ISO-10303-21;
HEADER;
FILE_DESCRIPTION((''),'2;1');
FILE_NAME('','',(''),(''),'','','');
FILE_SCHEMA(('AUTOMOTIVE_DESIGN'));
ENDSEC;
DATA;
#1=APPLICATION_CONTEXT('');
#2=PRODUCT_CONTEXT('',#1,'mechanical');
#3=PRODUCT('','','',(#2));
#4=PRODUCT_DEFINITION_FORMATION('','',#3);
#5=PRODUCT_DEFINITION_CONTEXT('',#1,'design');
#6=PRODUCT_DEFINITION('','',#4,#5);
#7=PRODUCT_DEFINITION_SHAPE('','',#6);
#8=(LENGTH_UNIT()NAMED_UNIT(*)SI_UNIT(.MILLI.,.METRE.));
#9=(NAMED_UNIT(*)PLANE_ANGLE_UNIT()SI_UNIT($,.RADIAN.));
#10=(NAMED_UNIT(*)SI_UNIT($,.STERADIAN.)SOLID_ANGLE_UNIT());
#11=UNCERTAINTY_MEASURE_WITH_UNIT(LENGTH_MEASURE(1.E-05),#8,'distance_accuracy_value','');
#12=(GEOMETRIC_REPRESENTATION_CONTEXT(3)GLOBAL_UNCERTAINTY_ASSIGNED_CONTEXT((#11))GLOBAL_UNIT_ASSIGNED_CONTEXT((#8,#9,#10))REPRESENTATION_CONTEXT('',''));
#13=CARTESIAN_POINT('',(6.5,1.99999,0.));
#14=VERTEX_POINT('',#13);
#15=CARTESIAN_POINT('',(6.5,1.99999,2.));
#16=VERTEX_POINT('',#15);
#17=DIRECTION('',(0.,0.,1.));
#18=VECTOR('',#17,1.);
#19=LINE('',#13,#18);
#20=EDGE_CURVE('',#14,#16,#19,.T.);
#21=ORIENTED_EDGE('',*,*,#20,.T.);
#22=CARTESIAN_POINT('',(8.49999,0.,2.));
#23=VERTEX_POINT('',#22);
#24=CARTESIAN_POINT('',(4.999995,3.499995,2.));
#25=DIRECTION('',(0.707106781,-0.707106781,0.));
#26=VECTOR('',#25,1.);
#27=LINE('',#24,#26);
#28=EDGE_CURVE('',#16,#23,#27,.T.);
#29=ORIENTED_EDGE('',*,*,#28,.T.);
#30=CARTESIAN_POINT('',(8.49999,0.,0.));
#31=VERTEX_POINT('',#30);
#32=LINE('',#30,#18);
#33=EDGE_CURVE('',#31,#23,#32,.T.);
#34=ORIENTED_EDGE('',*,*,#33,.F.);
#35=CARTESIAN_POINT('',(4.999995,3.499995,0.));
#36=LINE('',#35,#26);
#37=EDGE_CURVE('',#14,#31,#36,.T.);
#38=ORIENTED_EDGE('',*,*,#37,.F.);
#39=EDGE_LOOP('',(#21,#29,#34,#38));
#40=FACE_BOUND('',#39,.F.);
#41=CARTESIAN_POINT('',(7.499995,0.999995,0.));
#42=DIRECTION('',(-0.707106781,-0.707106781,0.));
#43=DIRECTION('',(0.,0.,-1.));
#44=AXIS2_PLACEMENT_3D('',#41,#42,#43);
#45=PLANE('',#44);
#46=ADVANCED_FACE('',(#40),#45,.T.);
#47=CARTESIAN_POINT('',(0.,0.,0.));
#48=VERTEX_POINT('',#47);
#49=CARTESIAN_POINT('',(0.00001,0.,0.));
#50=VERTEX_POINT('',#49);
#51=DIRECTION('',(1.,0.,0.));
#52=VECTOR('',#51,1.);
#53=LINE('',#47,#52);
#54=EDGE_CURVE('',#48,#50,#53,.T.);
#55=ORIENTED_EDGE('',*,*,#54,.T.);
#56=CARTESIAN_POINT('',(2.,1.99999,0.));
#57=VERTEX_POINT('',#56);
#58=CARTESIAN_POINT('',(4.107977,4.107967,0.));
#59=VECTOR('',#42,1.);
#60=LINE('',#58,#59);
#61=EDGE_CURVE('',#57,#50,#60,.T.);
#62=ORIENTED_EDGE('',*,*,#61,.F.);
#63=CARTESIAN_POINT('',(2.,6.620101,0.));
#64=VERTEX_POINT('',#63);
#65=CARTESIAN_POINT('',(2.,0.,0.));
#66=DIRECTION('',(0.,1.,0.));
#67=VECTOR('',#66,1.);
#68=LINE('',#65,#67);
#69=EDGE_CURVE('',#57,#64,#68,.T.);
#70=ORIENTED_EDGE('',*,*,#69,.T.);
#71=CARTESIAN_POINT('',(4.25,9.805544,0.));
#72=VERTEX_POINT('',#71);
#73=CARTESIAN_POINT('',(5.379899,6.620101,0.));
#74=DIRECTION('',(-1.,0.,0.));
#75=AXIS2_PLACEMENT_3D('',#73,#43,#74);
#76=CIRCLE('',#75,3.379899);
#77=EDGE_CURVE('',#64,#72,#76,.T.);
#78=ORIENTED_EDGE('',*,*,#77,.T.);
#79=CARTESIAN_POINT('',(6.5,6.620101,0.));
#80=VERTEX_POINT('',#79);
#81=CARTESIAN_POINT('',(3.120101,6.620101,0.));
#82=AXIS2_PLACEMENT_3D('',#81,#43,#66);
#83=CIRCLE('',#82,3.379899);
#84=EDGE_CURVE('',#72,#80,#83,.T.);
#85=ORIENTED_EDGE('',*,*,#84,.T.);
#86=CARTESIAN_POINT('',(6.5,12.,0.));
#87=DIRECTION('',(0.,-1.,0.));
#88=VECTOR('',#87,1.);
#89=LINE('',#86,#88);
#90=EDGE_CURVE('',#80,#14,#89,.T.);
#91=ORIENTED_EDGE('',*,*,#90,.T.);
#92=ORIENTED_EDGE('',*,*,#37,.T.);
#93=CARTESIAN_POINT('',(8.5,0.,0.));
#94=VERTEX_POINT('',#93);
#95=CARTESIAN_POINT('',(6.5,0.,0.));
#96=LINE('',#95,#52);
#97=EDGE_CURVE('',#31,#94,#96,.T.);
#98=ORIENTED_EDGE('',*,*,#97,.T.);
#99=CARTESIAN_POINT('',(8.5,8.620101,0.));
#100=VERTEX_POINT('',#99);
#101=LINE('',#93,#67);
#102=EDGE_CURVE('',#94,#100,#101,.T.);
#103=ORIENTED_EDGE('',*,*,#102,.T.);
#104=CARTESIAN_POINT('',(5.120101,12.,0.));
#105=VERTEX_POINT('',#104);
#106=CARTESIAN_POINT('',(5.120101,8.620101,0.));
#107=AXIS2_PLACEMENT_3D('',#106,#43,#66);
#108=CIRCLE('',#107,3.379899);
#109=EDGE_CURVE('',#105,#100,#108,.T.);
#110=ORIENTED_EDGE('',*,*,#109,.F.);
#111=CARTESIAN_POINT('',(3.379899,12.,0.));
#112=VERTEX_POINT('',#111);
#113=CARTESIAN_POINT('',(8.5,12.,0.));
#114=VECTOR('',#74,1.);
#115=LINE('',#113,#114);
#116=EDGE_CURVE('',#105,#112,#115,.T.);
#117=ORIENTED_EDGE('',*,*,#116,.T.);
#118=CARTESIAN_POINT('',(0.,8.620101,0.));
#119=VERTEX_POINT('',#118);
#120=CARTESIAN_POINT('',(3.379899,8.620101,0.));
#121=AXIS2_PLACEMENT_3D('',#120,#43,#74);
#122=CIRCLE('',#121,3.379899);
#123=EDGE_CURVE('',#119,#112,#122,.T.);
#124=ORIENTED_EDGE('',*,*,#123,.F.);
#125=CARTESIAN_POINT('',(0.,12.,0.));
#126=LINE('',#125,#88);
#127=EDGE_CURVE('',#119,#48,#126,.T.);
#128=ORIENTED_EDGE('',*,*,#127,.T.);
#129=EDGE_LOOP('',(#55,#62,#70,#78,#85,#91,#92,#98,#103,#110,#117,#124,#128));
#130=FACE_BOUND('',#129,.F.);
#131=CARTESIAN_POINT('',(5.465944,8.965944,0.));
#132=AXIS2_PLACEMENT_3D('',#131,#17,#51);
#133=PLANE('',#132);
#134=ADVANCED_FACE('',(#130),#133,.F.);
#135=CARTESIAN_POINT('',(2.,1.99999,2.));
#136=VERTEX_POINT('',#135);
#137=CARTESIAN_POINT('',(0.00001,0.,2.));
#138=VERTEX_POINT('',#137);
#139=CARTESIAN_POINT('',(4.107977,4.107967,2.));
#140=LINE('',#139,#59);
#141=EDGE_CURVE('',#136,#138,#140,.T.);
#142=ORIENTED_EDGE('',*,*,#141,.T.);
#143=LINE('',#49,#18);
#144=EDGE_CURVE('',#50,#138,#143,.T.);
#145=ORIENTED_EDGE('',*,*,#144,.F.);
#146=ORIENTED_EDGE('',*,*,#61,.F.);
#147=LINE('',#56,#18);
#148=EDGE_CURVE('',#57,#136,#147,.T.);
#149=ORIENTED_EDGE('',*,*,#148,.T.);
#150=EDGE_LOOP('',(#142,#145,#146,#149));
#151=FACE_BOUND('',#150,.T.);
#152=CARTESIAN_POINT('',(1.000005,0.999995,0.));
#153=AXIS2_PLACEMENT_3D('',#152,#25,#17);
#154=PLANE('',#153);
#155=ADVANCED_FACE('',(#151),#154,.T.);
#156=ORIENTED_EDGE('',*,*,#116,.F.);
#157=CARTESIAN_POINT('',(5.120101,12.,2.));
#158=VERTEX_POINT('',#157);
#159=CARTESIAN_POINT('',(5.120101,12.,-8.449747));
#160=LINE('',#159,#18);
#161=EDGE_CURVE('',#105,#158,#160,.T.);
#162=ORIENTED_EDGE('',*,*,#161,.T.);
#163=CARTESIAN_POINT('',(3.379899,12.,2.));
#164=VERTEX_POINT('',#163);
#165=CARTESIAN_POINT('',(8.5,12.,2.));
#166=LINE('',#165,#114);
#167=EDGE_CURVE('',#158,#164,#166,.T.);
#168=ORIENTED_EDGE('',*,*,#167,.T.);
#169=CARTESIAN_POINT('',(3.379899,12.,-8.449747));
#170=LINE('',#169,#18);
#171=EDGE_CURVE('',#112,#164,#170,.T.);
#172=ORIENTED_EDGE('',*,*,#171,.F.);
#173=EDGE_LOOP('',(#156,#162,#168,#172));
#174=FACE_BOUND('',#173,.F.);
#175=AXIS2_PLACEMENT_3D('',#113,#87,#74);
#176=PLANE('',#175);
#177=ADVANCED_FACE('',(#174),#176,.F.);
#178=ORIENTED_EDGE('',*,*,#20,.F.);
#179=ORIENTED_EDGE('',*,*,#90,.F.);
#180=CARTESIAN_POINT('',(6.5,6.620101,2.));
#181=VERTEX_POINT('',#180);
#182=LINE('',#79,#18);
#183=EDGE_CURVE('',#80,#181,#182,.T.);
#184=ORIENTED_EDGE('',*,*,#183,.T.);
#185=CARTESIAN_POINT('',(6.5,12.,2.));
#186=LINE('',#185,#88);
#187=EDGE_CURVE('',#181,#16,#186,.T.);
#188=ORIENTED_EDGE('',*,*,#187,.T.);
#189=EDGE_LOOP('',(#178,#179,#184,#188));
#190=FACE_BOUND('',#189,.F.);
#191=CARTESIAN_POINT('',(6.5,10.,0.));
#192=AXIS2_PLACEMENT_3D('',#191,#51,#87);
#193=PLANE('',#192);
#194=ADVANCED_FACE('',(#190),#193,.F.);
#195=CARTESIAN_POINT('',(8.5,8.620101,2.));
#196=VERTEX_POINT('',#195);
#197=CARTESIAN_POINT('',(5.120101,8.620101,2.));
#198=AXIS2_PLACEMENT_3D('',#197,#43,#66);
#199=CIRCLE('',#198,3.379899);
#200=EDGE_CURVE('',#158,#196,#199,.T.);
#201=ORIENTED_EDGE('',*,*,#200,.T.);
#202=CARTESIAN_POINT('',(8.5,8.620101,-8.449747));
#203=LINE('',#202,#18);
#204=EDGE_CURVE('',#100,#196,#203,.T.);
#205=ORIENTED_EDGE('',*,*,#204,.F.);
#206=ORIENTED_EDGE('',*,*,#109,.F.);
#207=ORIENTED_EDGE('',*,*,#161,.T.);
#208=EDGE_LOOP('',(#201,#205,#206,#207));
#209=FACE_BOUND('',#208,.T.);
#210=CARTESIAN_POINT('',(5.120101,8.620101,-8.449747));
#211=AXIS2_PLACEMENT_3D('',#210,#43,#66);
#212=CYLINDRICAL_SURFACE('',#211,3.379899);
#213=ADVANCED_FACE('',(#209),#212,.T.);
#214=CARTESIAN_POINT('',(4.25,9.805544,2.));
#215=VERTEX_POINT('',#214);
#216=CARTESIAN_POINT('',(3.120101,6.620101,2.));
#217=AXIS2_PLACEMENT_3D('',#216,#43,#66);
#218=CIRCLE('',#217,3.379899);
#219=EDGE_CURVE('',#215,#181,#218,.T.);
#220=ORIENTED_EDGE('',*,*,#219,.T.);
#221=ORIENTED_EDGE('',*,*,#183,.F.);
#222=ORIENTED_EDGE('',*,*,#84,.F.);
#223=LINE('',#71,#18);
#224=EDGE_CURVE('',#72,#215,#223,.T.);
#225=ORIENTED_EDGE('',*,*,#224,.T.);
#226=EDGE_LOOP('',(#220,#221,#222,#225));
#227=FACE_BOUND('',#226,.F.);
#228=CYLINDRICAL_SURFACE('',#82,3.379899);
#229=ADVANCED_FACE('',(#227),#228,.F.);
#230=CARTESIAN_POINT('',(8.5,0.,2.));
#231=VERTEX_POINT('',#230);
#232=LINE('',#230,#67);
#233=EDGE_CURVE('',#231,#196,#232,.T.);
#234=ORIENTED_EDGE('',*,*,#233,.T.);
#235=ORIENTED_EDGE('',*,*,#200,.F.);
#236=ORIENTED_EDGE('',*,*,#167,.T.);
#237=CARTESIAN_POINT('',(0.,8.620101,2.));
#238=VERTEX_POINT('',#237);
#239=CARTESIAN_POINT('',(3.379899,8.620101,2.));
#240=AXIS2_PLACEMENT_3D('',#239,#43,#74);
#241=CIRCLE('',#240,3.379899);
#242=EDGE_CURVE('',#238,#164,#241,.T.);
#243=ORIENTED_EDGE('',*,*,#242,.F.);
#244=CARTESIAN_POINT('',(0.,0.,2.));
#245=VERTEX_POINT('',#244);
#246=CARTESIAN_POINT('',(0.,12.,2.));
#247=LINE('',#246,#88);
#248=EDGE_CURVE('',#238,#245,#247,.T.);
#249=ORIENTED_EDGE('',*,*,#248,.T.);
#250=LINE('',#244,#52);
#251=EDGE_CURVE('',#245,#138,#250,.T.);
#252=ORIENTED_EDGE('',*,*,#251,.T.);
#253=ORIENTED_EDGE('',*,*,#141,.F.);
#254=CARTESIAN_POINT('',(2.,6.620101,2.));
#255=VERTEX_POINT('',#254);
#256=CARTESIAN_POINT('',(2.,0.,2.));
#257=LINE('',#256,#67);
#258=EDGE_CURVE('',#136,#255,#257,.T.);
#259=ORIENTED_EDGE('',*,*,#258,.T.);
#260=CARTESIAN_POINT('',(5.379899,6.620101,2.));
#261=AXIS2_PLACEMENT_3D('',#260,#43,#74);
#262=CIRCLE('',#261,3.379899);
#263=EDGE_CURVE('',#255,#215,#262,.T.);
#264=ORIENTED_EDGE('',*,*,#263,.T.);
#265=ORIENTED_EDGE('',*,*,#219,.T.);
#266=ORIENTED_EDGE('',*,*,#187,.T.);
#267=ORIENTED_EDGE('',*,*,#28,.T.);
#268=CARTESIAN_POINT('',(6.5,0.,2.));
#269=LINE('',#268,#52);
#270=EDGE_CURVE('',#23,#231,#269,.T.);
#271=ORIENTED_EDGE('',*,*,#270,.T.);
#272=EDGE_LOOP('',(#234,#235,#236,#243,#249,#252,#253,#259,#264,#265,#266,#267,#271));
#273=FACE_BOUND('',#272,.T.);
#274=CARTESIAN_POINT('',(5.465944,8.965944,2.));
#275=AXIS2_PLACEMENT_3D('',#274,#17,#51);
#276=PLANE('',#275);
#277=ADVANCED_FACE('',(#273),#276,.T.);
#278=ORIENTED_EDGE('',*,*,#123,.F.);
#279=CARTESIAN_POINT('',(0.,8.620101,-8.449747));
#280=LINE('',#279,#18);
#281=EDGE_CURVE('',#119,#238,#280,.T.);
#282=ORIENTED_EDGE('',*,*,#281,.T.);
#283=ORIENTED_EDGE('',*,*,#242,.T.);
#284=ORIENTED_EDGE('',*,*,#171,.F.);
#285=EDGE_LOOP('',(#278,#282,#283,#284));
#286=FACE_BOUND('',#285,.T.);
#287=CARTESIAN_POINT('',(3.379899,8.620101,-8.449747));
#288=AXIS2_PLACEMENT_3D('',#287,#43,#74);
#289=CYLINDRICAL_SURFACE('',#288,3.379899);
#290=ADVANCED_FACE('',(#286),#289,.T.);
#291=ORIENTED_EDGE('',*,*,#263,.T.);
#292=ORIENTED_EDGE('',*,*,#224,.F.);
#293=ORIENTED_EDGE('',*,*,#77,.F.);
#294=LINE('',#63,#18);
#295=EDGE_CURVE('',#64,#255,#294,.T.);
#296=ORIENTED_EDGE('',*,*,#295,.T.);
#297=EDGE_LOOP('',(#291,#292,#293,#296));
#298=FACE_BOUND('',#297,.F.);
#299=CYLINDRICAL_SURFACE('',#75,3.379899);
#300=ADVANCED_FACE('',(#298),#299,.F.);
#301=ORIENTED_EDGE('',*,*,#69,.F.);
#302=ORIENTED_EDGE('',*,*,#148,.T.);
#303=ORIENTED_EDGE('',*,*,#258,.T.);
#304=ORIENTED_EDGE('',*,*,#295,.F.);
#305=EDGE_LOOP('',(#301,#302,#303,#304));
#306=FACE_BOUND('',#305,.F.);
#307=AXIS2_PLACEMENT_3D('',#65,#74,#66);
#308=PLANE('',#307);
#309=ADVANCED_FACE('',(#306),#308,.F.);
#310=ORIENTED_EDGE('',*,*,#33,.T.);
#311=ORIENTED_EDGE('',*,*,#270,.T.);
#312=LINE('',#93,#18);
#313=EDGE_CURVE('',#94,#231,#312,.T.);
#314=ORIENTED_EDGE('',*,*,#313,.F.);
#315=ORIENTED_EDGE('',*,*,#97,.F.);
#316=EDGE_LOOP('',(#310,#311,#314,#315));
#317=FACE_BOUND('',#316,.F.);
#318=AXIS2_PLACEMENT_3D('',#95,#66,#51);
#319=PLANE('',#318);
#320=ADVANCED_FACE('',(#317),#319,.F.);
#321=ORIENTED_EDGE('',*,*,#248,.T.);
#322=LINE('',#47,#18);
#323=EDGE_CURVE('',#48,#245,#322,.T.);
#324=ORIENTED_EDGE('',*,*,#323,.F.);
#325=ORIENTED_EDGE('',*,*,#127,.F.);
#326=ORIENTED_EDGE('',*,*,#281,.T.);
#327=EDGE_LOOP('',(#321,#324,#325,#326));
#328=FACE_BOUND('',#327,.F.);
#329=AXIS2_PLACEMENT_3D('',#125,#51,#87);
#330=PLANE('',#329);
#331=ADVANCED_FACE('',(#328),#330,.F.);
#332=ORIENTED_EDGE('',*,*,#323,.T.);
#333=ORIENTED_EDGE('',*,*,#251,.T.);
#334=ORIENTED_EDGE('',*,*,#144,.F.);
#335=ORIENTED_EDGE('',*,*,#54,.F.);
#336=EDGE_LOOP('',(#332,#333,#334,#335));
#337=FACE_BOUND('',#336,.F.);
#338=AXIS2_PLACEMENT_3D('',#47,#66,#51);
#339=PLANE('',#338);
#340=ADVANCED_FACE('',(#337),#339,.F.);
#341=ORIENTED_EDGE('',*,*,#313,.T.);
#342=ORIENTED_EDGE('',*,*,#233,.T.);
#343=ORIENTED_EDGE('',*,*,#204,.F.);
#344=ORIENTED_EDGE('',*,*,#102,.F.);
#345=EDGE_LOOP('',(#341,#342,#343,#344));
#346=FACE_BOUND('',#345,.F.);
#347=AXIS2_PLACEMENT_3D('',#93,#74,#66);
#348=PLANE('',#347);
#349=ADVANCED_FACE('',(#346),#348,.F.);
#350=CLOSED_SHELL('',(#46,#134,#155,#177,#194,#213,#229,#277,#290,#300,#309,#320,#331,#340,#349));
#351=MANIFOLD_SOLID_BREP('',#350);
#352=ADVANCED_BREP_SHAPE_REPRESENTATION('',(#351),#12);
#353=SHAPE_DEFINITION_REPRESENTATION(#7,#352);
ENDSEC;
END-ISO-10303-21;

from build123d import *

# Parameters (mm, degrees)
F0_W        = 4.5
F0_H        = 2
F1_DEPTH    = 2
F2_T1_DEPTH = 2
F2_T3_DEPTH = 18.8994949366
F3_SIZE     = 1.99999


# Not quite as in the source:
# - a fillet or chamfer that OpenCascade refuses, or shapes differently, is made with other operations: its cross-section is extruded or revolved along the edge and cut away or added
# - a fillet or chamfer is up to 0.001 mm smaller than in the source, because OpenCascade refuses the exact size


with BuildPart() as f1:
    # F0 (on Top) → F1 (new body)
    with BuildSketch(Plane.XY):
        Polygon((0, 12), (0, 0), (2, 0), (2, 10), (2, 12), align=None)
        Polygon((6.5, 12), (6.5, 10), (6.5, 0), (8.5, 0), (8.5, 12), align=None)
        with Locations((4.25, 11)):
            Rectangle(F0_W, F0_H)
    extrude(amount=F1_DEPTH)

    # F2: fillet of radius 3.3798989873 on 4 edges, made by hand

    # F2_s2 → F2_t1 (join)
    with BuildSketch(Plane.XY):
        with BuildLine():
            ThreePointArc((3.1201010127, 10), (5.5100505063, 9.0100505063), (6.5, 6.6201010127))
            Line((6.5, 6.6201010127), (6.5, 10))
            Line((6.5, 10), (3.1201010127, 10))
        make_face()
        with BuildLine():
            ThreePointArc((2, 6.6201010127), (2.9899494937, 9.0100505063), (5.3798989873, 10))
            Line((5.3798989873, 10), (2, 10))
            Line((2, 10), (2, 6.6201010127))
        make_face()
    extrude(amount=F2_T1_DEPTH)

    # F2_s4 → F2_t3 (cut)
    with BuildSketch(Plane.XY.offset(-8.4497474683)):
        with BuildLine():
            ThreePointArc((0, 8.6201010127), (0.9899494937, 11.0100505063), (3.3798989873, 12))
            Line((3.3798989873, 12), (0, 12))
            Line((0, 12), (0, 8.6201010127))
        make_face()
        with BuildLine():
            ThreePointArc((5.1201010127, 12), (7.5100505063, 11.0100505063), (8.5, 8.6201010127))
            Line((8.5, 8.6201010127), (8.5, 12))
            Line((8.5, 12), (5.1201010127, 12))
        make_face()
    extrude(amount=F2_T3_DEPTH, mode=Mode.SUBTRACT)

    # F3 (size 2 in the source; OpenCascade refuses exactly that, so slightly less here)
    f3_edges = [f1.edges().sort_by_distance(p)[0] for p in [
        (2, 0, 1),
        (6.5, 0, 1),
    ]]
    chamfer(f3_edges, length=F3_SIZE)


solid = f1.part
